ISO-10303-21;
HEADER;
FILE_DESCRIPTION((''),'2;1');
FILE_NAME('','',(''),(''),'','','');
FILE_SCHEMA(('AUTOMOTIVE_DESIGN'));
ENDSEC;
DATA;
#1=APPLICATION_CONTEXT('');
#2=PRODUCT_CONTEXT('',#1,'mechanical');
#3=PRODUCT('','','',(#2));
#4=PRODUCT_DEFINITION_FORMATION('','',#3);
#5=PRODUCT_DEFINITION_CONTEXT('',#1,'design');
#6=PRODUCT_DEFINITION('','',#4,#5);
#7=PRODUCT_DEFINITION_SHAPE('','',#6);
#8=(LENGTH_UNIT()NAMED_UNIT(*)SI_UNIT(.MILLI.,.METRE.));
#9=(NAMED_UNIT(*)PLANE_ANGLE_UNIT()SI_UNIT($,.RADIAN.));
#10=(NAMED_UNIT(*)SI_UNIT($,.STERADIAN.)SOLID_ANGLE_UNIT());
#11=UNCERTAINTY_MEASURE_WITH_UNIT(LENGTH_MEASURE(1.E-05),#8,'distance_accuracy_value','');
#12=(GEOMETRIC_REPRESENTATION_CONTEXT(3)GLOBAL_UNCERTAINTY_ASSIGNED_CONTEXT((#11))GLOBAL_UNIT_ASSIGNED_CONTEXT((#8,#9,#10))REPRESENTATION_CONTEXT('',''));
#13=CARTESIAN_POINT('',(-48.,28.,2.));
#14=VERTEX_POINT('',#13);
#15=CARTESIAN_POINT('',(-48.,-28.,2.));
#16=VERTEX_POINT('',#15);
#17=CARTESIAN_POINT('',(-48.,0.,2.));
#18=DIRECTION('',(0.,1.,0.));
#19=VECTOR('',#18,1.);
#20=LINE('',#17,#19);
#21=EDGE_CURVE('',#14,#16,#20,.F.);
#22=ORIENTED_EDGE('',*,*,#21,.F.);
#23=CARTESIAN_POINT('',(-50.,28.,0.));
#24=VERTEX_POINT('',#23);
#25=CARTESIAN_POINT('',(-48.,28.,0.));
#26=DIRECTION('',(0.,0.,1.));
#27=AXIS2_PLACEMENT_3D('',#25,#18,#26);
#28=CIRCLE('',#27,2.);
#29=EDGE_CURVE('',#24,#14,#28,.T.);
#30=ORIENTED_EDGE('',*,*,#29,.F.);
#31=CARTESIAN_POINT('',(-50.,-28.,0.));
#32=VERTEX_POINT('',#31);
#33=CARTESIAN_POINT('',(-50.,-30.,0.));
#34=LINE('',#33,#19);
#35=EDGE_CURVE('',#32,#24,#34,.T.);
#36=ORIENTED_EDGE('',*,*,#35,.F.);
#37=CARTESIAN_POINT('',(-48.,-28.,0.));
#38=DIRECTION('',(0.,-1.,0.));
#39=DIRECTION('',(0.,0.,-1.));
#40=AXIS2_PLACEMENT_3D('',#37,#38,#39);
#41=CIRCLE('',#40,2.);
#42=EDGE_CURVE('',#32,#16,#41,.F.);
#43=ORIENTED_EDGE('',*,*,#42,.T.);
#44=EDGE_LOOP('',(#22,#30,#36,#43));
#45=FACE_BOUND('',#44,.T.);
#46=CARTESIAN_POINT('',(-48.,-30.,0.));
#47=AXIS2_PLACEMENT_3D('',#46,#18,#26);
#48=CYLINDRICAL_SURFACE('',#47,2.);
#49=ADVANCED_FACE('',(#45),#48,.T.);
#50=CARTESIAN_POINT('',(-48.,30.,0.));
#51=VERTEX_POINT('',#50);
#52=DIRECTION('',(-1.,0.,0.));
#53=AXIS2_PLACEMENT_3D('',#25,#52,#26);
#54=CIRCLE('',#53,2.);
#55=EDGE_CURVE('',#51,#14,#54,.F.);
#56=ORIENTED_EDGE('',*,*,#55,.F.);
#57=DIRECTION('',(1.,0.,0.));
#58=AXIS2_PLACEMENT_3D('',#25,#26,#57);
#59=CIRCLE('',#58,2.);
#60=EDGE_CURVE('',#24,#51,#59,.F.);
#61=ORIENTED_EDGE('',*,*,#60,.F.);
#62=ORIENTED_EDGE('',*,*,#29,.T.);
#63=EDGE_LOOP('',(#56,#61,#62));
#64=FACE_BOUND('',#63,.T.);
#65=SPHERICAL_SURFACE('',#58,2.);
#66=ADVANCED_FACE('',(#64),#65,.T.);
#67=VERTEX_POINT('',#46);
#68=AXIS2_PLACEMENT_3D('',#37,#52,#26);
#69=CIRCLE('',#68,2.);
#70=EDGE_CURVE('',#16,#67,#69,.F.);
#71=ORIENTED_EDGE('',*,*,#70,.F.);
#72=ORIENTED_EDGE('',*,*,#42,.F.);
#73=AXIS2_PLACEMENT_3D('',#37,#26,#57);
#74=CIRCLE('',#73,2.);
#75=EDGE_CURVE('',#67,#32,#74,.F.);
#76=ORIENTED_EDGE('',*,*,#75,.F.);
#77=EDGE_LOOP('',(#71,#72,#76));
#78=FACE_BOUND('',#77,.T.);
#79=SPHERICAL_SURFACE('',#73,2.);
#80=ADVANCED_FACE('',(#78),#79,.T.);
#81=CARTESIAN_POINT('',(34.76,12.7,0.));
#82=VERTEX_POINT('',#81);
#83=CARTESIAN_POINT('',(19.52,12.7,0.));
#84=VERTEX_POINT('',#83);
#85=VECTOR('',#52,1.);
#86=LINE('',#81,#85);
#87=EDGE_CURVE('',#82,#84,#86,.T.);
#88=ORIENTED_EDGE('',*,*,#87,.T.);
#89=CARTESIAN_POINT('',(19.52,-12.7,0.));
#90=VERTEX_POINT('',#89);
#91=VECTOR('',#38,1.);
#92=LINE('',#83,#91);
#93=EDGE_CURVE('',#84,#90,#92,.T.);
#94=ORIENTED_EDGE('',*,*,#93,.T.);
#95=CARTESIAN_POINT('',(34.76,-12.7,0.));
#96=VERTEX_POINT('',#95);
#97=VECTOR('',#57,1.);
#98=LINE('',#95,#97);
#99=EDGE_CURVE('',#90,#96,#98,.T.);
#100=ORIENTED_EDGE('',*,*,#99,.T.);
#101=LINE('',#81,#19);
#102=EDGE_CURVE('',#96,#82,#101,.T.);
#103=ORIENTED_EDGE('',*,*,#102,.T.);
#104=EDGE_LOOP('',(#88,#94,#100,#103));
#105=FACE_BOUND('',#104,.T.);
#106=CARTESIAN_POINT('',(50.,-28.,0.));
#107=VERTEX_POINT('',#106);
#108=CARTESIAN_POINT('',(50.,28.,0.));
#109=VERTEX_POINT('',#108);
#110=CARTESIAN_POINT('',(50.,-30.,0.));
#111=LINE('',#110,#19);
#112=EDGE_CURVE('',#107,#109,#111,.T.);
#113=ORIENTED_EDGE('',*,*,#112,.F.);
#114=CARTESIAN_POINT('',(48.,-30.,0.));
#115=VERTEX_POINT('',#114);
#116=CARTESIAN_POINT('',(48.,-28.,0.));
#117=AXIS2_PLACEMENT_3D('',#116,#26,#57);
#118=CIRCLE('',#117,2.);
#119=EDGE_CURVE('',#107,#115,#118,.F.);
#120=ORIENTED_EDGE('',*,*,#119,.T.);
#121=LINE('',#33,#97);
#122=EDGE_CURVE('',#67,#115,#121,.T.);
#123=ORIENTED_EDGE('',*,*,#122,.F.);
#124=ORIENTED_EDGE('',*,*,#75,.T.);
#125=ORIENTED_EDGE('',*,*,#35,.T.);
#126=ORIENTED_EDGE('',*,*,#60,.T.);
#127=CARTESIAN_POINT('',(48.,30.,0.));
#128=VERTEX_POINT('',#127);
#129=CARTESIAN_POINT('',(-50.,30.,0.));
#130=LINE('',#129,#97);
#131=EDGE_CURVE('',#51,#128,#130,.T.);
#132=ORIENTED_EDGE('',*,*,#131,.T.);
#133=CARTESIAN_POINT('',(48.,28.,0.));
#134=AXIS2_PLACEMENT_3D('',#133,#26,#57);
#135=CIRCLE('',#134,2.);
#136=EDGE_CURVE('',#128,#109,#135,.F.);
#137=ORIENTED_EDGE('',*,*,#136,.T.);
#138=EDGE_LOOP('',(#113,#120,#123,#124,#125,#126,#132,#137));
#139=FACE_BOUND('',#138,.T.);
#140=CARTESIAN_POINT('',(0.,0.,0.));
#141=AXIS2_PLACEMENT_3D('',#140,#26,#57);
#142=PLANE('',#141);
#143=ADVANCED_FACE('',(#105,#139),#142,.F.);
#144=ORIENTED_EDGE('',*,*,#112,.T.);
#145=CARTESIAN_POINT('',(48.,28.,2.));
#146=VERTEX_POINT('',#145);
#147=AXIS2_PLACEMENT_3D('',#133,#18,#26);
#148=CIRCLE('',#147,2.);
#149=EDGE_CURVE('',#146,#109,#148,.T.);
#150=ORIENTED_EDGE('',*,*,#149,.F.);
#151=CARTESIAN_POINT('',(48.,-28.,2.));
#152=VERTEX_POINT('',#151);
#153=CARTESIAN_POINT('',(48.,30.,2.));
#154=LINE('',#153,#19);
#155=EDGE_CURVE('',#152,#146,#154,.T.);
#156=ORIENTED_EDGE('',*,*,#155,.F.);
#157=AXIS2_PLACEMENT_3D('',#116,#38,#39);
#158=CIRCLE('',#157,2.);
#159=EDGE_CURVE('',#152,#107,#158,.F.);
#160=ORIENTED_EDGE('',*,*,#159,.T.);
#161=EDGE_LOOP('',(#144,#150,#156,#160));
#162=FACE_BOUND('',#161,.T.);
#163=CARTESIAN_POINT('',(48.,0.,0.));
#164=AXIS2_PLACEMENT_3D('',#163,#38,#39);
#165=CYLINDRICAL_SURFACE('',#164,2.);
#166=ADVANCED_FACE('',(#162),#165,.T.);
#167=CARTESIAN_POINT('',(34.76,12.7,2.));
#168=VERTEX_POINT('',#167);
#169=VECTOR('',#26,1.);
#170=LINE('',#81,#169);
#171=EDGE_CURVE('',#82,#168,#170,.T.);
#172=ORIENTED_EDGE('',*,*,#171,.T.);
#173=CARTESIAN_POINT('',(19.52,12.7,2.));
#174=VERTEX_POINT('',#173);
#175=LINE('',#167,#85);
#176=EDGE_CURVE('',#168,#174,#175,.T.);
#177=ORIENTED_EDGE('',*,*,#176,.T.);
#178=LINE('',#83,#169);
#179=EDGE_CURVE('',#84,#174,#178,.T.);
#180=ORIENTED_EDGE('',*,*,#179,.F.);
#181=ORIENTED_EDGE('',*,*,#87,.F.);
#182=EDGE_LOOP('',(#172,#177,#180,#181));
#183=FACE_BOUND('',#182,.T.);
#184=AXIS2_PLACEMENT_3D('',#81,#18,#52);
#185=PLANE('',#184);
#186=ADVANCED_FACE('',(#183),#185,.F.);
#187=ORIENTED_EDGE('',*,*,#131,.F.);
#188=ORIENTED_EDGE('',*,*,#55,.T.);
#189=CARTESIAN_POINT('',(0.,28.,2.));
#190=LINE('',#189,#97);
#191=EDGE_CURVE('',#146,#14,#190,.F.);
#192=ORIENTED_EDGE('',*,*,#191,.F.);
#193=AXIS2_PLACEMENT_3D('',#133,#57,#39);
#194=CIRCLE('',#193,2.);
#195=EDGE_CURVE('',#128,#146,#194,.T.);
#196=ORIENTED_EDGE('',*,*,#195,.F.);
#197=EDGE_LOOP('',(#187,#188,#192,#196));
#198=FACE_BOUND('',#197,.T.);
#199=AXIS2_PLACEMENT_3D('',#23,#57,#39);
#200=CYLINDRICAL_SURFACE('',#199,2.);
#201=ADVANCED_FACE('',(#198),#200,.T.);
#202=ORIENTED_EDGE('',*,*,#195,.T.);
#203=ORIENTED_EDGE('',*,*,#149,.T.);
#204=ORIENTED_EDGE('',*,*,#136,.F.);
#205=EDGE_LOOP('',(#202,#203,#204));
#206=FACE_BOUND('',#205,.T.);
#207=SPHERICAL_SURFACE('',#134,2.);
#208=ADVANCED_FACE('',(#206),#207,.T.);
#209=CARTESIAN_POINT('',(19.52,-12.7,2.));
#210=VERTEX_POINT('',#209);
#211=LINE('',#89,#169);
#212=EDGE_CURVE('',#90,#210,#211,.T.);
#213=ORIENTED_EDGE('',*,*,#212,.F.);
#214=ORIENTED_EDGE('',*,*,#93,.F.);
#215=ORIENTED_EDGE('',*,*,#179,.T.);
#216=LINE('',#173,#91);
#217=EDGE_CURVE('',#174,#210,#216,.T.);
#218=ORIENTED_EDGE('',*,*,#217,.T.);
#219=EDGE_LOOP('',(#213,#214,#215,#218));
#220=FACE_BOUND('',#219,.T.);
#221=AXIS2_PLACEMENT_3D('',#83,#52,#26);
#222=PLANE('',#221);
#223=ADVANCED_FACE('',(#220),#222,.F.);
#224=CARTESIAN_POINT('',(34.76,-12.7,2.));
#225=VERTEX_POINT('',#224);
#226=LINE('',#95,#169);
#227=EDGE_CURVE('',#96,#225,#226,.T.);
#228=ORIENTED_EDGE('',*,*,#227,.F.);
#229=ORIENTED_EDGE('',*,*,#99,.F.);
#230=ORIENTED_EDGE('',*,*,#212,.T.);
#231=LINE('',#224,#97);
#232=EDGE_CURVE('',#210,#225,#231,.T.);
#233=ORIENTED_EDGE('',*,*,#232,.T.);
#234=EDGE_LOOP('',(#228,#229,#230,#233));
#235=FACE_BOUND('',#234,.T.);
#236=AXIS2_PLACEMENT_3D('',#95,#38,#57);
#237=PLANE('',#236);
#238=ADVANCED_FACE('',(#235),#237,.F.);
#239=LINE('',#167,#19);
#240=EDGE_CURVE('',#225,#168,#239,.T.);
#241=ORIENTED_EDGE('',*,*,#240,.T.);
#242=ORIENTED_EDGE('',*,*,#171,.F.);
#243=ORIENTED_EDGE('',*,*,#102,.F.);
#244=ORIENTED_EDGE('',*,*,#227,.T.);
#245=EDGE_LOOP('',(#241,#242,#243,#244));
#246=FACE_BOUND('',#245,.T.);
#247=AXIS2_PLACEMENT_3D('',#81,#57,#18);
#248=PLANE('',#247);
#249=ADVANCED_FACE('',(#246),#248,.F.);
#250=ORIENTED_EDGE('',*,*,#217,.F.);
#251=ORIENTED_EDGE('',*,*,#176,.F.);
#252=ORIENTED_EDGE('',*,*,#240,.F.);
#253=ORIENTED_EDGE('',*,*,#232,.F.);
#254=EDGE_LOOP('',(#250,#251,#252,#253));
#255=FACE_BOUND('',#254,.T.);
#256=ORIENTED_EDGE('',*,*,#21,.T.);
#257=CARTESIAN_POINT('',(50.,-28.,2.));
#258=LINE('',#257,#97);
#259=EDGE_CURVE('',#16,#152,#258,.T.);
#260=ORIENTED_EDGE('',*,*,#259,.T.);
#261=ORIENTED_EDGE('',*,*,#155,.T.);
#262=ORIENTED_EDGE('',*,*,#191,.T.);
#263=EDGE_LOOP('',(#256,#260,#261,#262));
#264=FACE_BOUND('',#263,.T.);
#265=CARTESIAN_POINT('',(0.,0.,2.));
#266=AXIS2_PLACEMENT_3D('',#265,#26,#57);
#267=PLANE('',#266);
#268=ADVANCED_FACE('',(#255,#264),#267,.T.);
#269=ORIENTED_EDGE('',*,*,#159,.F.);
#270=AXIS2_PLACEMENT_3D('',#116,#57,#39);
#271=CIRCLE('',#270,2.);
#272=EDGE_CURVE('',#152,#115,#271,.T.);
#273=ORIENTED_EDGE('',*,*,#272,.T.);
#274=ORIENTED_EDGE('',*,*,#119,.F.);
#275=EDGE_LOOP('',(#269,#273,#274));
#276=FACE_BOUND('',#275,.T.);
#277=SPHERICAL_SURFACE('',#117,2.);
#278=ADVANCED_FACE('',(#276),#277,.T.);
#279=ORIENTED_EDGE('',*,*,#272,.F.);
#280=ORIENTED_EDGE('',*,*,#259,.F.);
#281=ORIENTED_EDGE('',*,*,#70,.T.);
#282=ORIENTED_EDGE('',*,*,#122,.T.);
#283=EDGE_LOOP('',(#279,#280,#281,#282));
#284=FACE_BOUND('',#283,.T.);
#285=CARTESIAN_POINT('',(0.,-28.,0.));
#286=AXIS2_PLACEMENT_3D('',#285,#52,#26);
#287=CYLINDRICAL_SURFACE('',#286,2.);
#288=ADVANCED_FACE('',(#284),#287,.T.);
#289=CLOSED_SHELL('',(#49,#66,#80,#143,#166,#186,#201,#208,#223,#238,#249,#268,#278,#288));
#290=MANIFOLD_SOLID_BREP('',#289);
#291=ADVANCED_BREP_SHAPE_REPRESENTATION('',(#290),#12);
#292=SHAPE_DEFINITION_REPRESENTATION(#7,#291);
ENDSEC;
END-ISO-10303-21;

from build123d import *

# Parameters (mm, degrees)
SKETCH1_W           = 100
SKETCH1_H           = 60
BOSS_EXTRUDE1_DEPTH = 2
FILLET1_R           = 2
SKETCH2_W           = 15.24
SKETCH2_H           = 25.4
CUT_EXTRUDE1_DEPTH  = 59.343808583


with BuildPart() as part:
    # Sketch1 → Boss-Extrude1 (new body)
    with BuildSketch(Plane.XY):
        Rectangle(SKETCH1_W, SKETCH1_H)
    extrude(amount=BOSS_EXTRUDE1_DEPTH)

    # Fillet1
    fillet1_edges = [part.edges().sort_by_distance(p)[0] for p in [
        (0, 30, 2),
        (-50, 0, 2),
        (0, -30, 2),
        (50, 0, 2),
        (-50, -30, 1),
        (-50, 30, 1),
        (50, 30, 1),
        (50, -30, 1),
    ]]
    fillet(fillet1_edges, radius=FILLET1_R - 0.0001)  # a hair under: the kernel refuses the full size

    # Sketch2 → Cut-Extrude1 (cut, through all)
    with BuildSketch(Plane.XY.offset(2)):
        with Locations((27.14, 0)):
            Rectangle(SKETCH2_W, SKETCH2_H)
    extrude(amount=-CUT_EXTRUDE1_DEPTH, mode=Mode.SUBTRACT)


solid = part.part
